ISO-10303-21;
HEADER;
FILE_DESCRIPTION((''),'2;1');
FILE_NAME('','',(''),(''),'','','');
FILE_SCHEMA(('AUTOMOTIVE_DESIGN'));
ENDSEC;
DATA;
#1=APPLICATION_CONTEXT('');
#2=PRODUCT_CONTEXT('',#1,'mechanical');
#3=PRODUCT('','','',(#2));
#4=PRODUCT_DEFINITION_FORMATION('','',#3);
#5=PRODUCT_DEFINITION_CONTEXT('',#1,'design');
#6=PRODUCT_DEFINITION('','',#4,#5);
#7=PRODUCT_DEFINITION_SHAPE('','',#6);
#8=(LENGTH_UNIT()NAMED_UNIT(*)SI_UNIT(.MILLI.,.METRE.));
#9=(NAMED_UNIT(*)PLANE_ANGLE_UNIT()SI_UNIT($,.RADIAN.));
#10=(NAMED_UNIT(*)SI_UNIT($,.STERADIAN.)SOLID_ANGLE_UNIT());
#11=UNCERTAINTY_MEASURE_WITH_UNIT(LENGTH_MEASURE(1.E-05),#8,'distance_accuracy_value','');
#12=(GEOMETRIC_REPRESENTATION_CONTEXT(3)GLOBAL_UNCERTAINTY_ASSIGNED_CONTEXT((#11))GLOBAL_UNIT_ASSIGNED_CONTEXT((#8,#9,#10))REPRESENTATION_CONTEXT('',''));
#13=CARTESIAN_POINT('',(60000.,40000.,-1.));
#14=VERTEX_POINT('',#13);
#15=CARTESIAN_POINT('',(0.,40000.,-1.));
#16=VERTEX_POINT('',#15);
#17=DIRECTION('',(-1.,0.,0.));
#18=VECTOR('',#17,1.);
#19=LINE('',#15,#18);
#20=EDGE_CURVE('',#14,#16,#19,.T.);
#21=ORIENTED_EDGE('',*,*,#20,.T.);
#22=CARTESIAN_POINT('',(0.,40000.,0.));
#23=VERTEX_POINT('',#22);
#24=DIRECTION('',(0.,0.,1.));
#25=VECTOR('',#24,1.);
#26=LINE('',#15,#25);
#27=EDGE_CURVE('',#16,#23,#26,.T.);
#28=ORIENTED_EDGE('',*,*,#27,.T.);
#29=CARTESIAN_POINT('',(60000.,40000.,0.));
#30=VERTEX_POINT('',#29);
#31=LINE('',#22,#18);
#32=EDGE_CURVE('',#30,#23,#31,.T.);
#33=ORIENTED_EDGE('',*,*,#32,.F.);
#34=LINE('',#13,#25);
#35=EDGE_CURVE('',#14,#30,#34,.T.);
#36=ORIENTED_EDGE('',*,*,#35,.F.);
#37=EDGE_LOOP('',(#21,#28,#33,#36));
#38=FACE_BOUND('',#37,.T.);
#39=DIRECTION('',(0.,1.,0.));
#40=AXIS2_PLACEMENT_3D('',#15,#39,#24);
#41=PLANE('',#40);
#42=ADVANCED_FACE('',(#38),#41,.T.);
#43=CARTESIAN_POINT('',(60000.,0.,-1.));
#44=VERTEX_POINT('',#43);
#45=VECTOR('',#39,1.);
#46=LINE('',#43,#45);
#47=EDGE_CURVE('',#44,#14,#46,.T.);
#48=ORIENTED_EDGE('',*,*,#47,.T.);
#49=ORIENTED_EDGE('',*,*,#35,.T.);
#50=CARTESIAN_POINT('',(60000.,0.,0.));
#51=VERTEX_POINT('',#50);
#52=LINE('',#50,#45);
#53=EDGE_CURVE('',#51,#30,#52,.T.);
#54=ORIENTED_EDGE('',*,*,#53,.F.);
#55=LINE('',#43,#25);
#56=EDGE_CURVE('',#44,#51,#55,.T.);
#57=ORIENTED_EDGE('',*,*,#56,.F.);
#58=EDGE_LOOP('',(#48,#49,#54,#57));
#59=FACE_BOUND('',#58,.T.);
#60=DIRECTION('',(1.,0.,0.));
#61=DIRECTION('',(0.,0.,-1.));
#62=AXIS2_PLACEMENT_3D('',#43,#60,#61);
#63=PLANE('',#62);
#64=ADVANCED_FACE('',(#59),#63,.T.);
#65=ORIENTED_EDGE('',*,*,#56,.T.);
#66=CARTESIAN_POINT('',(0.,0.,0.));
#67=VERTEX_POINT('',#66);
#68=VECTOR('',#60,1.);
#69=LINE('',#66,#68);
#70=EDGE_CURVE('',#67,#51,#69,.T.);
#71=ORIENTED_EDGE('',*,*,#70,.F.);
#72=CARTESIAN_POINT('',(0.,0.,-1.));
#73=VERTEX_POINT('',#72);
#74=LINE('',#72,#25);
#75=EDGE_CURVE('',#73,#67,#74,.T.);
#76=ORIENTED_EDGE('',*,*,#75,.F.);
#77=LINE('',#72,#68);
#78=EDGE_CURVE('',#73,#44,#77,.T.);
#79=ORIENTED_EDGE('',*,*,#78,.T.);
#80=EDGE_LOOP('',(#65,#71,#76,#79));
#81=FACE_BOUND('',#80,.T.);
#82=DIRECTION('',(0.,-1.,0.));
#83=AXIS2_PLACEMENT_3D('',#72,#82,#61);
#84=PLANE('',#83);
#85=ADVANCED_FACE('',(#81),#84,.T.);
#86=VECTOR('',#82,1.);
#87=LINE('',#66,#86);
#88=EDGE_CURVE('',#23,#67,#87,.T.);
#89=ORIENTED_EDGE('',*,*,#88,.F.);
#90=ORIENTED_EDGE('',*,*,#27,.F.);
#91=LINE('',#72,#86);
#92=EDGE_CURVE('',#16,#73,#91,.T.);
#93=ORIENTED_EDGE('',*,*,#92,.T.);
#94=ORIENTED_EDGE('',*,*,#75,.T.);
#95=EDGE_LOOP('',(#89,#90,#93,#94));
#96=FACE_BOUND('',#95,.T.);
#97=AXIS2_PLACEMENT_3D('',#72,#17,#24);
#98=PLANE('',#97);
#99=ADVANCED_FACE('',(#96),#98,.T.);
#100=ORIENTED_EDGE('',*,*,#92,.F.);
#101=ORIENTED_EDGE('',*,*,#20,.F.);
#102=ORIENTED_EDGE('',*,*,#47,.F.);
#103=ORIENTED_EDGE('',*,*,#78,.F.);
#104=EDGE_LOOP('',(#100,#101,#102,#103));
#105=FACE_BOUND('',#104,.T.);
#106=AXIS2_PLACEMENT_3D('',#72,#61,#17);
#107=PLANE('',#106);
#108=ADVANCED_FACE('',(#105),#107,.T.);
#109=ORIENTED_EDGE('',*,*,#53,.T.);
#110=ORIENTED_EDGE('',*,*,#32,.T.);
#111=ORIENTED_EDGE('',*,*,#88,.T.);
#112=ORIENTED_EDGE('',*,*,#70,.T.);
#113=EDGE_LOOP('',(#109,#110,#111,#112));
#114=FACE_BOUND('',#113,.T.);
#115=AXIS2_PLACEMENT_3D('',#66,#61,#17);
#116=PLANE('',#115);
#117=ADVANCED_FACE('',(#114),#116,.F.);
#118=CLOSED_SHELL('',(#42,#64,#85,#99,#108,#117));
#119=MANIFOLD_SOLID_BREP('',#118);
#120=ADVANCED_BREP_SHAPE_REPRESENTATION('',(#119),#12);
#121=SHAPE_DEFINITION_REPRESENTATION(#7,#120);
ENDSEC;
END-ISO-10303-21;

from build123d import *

# Parameters (mm, degrees)
SKETCH_1_W             = 60000
SKETCH_1_H             = 40000
SM_BASE_FLANGE_1_DEPTH = 1


# Sheet-metal steps are written as plain solids
with BuildPart() as part:
    # Sketch 1 → 基体-法兰1 (new body)
    with BuildSketch(Plane.XY):
        with Locations((30000, 20000)):
            Rectangle(SKETCH_1_W, SKETCH_1_H)
    extrude(amount=-SM_BASE_FLANGE_1_DEPTH)


solid = part.part
